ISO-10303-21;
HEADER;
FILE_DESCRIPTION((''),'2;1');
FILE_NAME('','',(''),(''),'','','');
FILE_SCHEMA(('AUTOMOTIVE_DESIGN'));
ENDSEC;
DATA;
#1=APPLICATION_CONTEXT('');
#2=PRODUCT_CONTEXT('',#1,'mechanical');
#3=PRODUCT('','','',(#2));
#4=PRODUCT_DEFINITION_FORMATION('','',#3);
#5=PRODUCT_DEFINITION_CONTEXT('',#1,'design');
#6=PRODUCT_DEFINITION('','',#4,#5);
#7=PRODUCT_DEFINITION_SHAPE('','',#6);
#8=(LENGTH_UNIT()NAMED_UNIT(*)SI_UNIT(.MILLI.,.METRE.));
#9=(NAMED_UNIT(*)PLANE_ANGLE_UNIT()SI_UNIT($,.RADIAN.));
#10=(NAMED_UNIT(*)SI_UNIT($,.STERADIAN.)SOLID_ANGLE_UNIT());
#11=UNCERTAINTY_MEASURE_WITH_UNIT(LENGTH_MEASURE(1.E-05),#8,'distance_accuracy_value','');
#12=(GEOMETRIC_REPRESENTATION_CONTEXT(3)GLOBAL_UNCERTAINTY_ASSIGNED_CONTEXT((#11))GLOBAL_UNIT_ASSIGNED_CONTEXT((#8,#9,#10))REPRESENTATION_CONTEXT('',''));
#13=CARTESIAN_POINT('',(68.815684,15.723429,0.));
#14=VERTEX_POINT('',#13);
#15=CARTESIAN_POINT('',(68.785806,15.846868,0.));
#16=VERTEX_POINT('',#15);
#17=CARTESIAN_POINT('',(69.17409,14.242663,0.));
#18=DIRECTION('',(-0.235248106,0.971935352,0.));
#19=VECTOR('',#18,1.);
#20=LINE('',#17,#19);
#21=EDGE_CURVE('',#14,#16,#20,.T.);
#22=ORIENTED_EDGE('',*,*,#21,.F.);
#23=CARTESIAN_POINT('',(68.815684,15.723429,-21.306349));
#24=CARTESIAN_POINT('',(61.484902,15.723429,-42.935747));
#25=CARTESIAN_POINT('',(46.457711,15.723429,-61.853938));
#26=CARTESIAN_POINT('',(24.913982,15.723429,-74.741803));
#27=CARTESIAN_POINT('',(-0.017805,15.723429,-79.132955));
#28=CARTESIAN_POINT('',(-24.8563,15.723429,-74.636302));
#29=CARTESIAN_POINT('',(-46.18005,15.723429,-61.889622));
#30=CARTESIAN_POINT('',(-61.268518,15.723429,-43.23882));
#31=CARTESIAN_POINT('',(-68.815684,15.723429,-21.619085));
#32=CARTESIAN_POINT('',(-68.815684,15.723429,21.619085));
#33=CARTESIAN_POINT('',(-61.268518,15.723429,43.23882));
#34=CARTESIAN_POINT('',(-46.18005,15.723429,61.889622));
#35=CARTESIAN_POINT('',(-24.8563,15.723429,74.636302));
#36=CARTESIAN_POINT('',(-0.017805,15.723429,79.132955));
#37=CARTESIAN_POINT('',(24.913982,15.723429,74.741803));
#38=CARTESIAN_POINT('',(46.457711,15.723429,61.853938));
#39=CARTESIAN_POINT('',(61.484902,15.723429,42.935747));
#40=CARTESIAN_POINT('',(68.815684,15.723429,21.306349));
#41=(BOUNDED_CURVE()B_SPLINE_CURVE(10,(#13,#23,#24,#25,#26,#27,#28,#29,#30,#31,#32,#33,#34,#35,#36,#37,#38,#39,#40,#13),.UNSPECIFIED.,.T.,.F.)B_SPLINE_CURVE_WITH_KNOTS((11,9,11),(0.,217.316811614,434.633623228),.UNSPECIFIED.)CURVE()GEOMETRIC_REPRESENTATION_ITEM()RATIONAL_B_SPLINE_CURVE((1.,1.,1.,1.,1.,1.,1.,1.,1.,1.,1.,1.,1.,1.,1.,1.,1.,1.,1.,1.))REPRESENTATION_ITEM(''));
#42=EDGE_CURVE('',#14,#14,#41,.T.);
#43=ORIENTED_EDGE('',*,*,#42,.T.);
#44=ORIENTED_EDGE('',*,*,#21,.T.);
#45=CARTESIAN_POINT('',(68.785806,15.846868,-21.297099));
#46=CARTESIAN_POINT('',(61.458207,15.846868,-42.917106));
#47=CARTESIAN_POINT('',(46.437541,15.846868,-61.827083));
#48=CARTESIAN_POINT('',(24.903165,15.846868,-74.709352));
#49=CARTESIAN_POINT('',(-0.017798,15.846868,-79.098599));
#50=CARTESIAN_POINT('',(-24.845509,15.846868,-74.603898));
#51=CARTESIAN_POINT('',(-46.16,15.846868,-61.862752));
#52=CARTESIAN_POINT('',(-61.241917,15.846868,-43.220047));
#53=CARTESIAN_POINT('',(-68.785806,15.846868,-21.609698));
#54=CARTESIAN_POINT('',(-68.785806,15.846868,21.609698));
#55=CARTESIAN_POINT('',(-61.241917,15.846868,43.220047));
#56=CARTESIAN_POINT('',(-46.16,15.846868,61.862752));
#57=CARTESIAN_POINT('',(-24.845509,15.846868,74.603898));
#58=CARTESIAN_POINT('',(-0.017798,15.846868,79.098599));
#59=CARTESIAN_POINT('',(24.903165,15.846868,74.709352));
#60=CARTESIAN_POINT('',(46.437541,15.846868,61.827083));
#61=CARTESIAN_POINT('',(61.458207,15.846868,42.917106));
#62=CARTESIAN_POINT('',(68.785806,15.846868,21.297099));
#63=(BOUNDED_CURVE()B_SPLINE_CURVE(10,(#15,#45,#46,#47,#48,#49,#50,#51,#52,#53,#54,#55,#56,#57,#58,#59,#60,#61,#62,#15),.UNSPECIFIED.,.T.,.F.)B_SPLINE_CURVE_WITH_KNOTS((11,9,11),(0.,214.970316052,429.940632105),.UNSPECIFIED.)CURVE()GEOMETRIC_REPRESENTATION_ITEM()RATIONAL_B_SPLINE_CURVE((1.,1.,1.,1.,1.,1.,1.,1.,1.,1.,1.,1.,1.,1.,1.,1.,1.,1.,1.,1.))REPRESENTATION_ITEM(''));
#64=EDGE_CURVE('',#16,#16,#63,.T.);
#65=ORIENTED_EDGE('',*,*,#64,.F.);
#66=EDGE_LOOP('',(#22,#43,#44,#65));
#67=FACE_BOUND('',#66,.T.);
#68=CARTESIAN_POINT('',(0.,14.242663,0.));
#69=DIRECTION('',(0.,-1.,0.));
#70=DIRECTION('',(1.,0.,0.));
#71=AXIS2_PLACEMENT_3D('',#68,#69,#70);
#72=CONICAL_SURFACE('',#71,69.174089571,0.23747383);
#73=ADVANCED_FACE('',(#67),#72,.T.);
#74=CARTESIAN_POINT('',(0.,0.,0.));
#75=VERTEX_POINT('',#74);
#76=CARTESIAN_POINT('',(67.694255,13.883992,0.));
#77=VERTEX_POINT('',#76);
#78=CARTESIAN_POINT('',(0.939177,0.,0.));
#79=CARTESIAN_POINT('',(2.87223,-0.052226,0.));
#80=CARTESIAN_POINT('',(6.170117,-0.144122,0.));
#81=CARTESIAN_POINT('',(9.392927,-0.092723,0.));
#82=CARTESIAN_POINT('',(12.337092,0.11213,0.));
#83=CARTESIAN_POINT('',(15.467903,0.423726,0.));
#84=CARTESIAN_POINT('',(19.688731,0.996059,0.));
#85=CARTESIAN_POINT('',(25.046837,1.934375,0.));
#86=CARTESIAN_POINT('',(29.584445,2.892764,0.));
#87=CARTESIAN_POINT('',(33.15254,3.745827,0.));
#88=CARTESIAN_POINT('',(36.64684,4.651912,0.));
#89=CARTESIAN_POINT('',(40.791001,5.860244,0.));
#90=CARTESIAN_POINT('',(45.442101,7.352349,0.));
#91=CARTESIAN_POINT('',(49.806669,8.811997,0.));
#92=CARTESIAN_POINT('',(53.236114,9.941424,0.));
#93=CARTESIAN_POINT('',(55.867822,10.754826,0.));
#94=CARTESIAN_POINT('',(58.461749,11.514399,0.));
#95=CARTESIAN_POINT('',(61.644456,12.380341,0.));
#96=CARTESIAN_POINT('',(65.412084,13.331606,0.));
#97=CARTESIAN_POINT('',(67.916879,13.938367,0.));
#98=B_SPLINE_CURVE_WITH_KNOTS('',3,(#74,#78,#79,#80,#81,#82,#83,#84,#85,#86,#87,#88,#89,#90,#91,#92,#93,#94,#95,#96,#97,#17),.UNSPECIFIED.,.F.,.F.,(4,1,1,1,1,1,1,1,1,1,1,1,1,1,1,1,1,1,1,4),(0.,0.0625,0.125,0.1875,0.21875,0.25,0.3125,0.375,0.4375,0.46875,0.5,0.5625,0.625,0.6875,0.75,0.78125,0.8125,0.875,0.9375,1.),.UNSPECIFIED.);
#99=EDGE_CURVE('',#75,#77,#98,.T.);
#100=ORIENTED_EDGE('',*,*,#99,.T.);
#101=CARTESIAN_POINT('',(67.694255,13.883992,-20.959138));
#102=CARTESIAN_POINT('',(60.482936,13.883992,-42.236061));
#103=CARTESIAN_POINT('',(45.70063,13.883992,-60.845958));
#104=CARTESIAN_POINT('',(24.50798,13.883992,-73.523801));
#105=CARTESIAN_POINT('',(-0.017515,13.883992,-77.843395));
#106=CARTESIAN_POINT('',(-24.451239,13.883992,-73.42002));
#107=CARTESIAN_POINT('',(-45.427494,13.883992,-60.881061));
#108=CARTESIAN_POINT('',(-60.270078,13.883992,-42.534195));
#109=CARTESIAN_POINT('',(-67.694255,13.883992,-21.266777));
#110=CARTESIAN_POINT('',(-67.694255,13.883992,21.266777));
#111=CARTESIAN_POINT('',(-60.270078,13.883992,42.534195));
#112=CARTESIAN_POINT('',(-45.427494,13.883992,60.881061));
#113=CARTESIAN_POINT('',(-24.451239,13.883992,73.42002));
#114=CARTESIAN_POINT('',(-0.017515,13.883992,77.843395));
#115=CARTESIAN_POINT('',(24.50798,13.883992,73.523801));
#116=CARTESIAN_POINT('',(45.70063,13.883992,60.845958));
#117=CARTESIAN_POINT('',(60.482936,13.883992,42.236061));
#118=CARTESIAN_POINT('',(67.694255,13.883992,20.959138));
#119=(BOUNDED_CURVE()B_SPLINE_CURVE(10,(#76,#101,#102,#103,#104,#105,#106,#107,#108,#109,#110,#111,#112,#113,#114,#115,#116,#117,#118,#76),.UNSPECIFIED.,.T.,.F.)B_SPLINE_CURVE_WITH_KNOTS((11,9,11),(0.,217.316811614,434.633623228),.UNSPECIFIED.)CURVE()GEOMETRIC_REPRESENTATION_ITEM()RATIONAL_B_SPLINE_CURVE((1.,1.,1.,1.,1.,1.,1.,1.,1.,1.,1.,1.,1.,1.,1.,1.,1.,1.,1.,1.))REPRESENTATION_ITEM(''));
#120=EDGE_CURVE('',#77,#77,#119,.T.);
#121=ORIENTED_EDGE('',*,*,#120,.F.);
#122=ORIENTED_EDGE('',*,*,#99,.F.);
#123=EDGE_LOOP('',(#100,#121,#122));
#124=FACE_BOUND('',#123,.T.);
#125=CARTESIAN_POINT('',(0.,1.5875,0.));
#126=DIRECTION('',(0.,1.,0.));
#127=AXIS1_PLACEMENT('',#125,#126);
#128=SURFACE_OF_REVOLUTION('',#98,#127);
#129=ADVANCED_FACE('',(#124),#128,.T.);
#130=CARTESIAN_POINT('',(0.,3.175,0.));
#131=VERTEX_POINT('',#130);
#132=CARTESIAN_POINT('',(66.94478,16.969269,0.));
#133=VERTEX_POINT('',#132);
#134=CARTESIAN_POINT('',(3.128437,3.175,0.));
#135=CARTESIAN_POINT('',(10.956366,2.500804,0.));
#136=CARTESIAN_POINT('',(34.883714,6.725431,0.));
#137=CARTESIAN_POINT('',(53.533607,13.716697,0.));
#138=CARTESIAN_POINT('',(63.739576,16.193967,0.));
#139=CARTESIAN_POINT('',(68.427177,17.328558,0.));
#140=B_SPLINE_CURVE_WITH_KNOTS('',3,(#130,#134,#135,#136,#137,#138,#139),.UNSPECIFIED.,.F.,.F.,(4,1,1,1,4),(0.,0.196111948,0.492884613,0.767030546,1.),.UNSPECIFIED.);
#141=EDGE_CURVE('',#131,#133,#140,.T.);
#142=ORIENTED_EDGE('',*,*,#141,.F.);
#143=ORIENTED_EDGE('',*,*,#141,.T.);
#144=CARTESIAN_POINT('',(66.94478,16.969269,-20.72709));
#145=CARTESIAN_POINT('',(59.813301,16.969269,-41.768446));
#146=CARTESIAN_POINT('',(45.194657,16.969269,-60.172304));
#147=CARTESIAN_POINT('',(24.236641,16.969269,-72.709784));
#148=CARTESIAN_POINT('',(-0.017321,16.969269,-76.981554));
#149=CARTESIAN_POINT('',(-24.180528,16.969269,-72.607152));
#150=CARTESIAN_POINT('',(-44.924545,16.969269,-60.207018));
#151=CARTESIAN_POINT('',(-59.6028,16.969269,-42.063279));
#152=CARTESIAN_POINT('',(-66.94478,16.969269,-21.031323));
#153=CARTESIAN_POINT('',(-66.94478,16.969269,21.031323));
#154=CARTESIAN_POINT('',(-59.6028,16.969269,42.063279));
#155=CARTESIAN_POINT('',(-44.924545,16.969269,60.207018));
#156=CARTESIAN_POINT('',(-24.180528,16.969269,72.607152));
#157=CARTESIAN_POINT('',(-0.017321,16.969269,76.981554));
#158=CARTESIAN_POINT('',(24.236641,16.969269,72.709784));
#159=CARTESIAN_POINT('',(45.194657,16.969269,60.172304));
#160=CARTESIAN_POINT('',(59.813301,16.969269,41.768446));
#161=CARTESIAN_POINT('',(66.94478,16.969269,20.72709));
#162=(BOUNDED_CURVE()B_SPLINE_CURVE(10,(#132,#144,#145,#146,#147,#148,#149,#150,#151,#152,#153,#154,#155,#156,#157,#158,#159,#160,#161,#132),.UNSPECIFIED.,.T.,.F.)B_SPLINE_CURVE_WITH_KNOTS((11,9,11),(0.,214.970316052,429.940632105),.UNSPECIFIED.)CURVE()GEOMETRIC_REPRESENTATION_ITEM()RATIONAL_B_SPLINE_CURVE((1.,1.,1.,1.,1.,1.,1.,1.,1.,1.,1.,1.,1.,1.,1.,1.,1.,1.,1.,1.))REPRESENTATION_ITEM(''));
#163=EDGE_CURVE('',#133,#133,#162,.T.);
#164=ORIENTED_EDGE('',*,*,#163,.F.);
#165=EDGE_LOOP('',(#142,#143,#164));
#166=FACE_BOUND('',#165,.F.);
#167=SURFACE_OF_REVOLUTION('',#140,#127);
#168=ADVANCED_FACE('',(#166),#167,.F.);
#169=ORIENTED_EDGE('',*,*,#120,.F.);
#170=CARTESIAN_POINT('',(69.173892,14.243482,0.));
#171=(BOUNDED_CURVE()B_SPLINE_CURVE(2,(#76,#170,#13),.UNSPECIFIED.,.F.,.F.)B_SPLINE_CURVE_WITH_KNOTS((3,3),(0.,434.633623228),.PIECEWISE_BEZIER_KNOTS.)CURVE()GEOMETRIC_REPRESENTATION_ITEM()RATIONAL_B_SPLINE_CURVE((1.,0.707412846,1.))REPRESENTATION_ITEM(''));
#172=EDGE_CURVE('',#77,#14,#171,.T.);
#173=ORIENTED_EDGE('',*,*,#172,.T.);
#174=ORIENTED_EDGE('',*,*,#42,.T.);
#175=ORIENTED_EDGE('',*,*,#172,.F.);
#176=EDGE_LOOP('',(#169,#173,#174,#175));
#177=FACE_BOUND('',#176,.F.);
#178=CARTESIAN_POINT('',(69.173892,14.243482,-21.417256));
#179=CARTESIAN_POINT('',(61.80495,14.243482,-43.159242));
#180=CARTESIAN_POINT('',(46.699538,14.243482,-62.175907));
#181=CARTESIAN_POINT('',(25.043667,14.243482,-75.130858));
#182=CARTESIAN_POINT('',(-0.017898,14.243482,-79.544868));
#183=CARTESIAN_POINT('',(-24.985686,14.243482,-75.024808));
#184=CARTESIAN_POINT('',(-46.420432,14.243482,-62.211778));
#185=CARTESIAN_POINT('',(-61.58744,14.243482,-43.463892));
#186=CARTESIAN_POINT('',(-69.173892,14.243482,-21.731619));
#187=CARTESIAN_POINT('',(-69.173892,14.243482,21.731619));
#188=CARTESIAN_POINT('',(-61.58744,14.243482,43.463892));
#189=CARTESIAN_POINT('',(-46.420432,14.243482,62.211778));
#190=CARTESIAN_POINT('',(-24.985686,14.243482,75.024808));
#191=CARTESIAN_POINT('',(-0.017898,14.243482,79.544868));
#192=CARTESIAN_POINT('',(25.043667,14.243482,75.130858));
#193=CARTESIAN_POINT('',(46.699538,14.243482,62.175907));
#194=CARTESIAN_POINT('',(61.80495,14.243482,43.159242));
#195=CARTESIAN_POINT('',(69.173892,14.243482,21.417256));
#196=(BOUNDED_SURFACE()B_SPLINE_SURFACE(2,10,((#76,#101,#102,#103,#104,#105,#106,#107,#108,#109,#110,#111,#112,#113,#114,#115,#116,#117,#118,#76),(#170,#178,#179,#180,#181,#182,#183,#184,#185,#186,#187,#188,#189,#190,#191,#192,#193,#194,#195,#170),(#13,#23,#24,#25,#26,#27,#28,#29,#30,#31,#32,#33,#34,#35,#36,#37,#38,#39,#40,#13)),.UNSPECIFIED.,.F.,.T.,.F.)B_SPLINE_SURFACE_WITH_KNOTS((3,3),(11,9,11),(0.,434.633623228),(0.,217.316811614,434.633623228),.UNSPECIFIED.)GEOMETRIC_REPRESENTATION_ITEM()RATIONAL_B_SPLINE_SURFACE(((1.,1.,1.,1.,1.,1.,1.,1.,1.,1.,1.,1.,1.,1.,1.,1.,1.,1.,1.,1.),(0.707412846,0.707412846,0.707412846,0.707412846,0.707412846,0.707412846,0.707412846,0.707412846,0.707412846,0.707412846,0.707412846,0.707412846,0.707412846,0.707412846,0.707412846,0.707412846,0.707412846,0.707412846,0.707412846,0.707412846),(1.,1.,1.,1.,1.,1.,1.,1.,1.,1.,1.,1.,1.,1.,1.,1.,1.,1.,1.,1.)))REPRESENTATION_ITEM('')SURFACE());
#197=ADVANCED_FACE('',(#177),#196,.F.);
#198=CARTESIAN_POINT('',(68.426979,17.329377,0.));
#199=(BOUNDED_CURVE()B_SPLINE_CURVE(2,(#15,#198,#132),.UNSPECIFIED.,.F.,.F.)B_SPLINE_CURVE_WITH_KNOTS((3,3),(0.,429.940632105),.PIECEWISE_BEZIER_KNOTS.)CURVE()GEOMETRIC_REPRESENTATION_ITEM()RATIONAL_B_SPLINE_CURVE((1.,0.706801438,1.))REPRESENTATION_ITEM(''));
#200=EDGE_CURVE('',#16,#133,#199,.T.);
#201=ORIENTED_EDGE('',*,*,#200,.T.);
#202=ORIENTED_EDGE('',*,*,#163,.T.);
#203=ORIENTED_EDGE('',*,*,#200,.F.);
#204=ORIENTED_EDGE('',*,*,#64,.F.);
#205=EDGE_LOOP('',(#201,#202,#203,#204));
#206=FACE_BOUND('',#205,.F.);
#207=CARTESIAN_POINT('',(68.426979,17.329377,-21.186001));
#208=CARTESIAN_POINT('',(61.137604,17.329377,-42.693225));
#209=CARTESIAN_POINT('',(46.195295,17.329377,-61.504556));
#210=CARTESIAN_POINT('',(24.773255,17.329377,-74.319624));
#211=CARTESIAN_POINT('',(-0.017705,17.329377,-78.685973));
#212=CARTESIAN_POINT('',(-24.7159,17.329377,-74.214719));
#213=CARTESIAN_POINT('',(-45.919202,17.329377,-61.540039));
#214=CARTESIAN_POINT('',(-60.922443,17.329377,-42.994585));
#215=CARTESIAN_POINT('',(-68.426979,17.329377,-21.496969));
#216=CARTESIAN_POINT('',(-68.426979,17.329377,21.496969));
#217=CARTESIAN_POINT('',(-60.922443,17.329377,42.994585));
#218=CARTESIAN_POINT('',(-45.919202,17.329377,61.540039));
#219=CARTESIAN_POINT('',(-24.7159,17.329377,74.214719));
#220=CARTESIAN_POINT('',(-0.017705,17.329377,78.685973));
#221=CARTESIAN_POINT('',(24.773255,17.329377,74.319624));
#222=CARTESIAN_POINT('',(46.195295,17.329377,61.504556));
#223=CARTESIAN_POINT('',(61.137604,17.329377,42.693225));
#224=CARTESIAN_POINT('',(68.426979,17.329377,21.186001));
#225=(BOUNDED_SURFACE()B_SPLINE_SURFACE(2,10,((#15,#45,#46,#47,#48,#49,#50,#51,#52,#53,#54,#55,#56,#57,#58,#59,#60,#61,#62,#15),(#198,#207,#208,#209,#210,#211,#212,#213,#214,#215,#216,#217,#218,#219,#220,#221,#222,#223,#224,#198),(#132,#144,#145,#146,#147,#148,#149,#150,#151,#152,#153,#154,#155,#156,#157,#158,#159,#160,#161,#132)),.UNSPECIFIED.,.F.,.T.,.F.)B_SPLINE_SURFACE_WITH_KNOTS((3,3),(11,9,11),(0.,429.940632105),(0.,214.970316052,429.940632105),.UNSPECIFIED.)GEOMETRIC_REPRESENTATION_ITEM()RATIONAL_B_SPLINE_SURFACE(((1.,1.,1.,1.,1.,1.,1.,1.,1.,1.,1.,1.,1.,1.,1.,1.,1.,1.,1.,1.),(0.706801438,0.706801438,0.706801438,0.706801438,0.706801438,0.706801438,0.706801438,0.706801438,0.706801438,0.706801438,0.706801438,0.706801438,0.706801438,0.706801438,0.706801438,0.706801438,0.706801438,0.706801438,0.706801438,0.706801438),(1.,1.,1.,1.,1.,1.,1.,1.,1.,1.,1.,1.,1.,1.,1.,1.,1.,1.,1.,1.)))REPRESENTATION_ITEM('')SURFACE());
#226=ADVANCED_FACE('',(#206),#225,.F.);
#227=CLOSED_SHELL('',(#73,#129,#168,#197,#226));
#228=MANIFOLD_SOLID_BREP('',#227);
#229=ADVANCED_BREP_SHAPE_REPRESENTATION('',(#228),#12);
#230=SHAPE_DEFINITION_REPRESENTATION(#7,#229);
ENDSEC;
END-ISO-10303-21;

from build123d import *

# Parameters (mm, degrees)
F4_R = 1.524


# Not quite as in the source:
# - a feature of the source that left no trace in its solid (it failed there, or was rolled back) is left out
# - the dataset's text gives a spline's control points without its knots; the knots are read off the source's solid


with BuildPart() as f1:
    # F0 (on Top) → F1 (revolve)
    with BuildSketch(Plane.XY):
        with BuildLine():
            Line((0, 3.175), (0, 0))
            add(Edge.make_bspline(
                [(0, 0), (0.9391765667, 0), (2.8722299911, -0.0522262833), (6.170117236, -0.1441224404), (9.3929267103, -0.0927233382), (12.3370917537, 0.1121304597), (15.4679032393, 0.4237260784), (19.6887306562, 0.9960590173), (25.0468368551, 1.9343747406), (29.5844448409, 2.8927642781), (33.1525403626, 3.7458266346), (36.6468404962, 4.6519123387), (40.7910006378, 5.8602443837), (45.4421011997, 7.3523485387), (49.8066693073, 8.8119965269), (53.2361141861, 9.9414244239), (55.8678215732, 10.7548261199), (58.4617485931, 11.5143988036), (61.6444560074, 12.380341327), (65.4120841236, 13.3316057251), (67.916879148, 13.9383668447), (69.1740895707, 14.2426631846)],
                knots=[0, 0, 0, 0, 0.0625, 0.125, 0.1875, 0.21875, 0.25, 0.3125, 0.375, 0.4375, 0.46875, 0.5, 0.5625, 0.625, 0.6875, 0.75, 0.78125, 0.8125, 0.875, 0.9375, 1, 1, 1, 1], degree=3))
            Line((69.1740895707, 14.2426631846), (68.4271768355, 17.3285579277))
            add(Edge.make_bspline(
                [(0, 3.175), (3.1284372612, 3.175), (10.9563662678, 2.5008036316), (34.8837140717, 6.7254308845), (53.5336074809, 13.7166970204), (63.7395760718, 16.1939668287), (68.4271768355, 17.3285579277)],
                knots=[0, 0, 0, 0, 0.1961119482, 0.4928846131, 0.767030546, 1, 1, 1, 1], degree=3))
        make_face()
    revolve(axis=Axis((0, 1.5875, 0), (0, 1, 0)))

    # F4
    f4_edges = [f1.edges().sort_by_distance(p)[0] for p in [
        (-68.427177, 17.328558, 0),
        (-69.17409, 14.242663, 0),
    ]]
    fillet(f4_edges, radius=F4_R)


solid = f1.part
